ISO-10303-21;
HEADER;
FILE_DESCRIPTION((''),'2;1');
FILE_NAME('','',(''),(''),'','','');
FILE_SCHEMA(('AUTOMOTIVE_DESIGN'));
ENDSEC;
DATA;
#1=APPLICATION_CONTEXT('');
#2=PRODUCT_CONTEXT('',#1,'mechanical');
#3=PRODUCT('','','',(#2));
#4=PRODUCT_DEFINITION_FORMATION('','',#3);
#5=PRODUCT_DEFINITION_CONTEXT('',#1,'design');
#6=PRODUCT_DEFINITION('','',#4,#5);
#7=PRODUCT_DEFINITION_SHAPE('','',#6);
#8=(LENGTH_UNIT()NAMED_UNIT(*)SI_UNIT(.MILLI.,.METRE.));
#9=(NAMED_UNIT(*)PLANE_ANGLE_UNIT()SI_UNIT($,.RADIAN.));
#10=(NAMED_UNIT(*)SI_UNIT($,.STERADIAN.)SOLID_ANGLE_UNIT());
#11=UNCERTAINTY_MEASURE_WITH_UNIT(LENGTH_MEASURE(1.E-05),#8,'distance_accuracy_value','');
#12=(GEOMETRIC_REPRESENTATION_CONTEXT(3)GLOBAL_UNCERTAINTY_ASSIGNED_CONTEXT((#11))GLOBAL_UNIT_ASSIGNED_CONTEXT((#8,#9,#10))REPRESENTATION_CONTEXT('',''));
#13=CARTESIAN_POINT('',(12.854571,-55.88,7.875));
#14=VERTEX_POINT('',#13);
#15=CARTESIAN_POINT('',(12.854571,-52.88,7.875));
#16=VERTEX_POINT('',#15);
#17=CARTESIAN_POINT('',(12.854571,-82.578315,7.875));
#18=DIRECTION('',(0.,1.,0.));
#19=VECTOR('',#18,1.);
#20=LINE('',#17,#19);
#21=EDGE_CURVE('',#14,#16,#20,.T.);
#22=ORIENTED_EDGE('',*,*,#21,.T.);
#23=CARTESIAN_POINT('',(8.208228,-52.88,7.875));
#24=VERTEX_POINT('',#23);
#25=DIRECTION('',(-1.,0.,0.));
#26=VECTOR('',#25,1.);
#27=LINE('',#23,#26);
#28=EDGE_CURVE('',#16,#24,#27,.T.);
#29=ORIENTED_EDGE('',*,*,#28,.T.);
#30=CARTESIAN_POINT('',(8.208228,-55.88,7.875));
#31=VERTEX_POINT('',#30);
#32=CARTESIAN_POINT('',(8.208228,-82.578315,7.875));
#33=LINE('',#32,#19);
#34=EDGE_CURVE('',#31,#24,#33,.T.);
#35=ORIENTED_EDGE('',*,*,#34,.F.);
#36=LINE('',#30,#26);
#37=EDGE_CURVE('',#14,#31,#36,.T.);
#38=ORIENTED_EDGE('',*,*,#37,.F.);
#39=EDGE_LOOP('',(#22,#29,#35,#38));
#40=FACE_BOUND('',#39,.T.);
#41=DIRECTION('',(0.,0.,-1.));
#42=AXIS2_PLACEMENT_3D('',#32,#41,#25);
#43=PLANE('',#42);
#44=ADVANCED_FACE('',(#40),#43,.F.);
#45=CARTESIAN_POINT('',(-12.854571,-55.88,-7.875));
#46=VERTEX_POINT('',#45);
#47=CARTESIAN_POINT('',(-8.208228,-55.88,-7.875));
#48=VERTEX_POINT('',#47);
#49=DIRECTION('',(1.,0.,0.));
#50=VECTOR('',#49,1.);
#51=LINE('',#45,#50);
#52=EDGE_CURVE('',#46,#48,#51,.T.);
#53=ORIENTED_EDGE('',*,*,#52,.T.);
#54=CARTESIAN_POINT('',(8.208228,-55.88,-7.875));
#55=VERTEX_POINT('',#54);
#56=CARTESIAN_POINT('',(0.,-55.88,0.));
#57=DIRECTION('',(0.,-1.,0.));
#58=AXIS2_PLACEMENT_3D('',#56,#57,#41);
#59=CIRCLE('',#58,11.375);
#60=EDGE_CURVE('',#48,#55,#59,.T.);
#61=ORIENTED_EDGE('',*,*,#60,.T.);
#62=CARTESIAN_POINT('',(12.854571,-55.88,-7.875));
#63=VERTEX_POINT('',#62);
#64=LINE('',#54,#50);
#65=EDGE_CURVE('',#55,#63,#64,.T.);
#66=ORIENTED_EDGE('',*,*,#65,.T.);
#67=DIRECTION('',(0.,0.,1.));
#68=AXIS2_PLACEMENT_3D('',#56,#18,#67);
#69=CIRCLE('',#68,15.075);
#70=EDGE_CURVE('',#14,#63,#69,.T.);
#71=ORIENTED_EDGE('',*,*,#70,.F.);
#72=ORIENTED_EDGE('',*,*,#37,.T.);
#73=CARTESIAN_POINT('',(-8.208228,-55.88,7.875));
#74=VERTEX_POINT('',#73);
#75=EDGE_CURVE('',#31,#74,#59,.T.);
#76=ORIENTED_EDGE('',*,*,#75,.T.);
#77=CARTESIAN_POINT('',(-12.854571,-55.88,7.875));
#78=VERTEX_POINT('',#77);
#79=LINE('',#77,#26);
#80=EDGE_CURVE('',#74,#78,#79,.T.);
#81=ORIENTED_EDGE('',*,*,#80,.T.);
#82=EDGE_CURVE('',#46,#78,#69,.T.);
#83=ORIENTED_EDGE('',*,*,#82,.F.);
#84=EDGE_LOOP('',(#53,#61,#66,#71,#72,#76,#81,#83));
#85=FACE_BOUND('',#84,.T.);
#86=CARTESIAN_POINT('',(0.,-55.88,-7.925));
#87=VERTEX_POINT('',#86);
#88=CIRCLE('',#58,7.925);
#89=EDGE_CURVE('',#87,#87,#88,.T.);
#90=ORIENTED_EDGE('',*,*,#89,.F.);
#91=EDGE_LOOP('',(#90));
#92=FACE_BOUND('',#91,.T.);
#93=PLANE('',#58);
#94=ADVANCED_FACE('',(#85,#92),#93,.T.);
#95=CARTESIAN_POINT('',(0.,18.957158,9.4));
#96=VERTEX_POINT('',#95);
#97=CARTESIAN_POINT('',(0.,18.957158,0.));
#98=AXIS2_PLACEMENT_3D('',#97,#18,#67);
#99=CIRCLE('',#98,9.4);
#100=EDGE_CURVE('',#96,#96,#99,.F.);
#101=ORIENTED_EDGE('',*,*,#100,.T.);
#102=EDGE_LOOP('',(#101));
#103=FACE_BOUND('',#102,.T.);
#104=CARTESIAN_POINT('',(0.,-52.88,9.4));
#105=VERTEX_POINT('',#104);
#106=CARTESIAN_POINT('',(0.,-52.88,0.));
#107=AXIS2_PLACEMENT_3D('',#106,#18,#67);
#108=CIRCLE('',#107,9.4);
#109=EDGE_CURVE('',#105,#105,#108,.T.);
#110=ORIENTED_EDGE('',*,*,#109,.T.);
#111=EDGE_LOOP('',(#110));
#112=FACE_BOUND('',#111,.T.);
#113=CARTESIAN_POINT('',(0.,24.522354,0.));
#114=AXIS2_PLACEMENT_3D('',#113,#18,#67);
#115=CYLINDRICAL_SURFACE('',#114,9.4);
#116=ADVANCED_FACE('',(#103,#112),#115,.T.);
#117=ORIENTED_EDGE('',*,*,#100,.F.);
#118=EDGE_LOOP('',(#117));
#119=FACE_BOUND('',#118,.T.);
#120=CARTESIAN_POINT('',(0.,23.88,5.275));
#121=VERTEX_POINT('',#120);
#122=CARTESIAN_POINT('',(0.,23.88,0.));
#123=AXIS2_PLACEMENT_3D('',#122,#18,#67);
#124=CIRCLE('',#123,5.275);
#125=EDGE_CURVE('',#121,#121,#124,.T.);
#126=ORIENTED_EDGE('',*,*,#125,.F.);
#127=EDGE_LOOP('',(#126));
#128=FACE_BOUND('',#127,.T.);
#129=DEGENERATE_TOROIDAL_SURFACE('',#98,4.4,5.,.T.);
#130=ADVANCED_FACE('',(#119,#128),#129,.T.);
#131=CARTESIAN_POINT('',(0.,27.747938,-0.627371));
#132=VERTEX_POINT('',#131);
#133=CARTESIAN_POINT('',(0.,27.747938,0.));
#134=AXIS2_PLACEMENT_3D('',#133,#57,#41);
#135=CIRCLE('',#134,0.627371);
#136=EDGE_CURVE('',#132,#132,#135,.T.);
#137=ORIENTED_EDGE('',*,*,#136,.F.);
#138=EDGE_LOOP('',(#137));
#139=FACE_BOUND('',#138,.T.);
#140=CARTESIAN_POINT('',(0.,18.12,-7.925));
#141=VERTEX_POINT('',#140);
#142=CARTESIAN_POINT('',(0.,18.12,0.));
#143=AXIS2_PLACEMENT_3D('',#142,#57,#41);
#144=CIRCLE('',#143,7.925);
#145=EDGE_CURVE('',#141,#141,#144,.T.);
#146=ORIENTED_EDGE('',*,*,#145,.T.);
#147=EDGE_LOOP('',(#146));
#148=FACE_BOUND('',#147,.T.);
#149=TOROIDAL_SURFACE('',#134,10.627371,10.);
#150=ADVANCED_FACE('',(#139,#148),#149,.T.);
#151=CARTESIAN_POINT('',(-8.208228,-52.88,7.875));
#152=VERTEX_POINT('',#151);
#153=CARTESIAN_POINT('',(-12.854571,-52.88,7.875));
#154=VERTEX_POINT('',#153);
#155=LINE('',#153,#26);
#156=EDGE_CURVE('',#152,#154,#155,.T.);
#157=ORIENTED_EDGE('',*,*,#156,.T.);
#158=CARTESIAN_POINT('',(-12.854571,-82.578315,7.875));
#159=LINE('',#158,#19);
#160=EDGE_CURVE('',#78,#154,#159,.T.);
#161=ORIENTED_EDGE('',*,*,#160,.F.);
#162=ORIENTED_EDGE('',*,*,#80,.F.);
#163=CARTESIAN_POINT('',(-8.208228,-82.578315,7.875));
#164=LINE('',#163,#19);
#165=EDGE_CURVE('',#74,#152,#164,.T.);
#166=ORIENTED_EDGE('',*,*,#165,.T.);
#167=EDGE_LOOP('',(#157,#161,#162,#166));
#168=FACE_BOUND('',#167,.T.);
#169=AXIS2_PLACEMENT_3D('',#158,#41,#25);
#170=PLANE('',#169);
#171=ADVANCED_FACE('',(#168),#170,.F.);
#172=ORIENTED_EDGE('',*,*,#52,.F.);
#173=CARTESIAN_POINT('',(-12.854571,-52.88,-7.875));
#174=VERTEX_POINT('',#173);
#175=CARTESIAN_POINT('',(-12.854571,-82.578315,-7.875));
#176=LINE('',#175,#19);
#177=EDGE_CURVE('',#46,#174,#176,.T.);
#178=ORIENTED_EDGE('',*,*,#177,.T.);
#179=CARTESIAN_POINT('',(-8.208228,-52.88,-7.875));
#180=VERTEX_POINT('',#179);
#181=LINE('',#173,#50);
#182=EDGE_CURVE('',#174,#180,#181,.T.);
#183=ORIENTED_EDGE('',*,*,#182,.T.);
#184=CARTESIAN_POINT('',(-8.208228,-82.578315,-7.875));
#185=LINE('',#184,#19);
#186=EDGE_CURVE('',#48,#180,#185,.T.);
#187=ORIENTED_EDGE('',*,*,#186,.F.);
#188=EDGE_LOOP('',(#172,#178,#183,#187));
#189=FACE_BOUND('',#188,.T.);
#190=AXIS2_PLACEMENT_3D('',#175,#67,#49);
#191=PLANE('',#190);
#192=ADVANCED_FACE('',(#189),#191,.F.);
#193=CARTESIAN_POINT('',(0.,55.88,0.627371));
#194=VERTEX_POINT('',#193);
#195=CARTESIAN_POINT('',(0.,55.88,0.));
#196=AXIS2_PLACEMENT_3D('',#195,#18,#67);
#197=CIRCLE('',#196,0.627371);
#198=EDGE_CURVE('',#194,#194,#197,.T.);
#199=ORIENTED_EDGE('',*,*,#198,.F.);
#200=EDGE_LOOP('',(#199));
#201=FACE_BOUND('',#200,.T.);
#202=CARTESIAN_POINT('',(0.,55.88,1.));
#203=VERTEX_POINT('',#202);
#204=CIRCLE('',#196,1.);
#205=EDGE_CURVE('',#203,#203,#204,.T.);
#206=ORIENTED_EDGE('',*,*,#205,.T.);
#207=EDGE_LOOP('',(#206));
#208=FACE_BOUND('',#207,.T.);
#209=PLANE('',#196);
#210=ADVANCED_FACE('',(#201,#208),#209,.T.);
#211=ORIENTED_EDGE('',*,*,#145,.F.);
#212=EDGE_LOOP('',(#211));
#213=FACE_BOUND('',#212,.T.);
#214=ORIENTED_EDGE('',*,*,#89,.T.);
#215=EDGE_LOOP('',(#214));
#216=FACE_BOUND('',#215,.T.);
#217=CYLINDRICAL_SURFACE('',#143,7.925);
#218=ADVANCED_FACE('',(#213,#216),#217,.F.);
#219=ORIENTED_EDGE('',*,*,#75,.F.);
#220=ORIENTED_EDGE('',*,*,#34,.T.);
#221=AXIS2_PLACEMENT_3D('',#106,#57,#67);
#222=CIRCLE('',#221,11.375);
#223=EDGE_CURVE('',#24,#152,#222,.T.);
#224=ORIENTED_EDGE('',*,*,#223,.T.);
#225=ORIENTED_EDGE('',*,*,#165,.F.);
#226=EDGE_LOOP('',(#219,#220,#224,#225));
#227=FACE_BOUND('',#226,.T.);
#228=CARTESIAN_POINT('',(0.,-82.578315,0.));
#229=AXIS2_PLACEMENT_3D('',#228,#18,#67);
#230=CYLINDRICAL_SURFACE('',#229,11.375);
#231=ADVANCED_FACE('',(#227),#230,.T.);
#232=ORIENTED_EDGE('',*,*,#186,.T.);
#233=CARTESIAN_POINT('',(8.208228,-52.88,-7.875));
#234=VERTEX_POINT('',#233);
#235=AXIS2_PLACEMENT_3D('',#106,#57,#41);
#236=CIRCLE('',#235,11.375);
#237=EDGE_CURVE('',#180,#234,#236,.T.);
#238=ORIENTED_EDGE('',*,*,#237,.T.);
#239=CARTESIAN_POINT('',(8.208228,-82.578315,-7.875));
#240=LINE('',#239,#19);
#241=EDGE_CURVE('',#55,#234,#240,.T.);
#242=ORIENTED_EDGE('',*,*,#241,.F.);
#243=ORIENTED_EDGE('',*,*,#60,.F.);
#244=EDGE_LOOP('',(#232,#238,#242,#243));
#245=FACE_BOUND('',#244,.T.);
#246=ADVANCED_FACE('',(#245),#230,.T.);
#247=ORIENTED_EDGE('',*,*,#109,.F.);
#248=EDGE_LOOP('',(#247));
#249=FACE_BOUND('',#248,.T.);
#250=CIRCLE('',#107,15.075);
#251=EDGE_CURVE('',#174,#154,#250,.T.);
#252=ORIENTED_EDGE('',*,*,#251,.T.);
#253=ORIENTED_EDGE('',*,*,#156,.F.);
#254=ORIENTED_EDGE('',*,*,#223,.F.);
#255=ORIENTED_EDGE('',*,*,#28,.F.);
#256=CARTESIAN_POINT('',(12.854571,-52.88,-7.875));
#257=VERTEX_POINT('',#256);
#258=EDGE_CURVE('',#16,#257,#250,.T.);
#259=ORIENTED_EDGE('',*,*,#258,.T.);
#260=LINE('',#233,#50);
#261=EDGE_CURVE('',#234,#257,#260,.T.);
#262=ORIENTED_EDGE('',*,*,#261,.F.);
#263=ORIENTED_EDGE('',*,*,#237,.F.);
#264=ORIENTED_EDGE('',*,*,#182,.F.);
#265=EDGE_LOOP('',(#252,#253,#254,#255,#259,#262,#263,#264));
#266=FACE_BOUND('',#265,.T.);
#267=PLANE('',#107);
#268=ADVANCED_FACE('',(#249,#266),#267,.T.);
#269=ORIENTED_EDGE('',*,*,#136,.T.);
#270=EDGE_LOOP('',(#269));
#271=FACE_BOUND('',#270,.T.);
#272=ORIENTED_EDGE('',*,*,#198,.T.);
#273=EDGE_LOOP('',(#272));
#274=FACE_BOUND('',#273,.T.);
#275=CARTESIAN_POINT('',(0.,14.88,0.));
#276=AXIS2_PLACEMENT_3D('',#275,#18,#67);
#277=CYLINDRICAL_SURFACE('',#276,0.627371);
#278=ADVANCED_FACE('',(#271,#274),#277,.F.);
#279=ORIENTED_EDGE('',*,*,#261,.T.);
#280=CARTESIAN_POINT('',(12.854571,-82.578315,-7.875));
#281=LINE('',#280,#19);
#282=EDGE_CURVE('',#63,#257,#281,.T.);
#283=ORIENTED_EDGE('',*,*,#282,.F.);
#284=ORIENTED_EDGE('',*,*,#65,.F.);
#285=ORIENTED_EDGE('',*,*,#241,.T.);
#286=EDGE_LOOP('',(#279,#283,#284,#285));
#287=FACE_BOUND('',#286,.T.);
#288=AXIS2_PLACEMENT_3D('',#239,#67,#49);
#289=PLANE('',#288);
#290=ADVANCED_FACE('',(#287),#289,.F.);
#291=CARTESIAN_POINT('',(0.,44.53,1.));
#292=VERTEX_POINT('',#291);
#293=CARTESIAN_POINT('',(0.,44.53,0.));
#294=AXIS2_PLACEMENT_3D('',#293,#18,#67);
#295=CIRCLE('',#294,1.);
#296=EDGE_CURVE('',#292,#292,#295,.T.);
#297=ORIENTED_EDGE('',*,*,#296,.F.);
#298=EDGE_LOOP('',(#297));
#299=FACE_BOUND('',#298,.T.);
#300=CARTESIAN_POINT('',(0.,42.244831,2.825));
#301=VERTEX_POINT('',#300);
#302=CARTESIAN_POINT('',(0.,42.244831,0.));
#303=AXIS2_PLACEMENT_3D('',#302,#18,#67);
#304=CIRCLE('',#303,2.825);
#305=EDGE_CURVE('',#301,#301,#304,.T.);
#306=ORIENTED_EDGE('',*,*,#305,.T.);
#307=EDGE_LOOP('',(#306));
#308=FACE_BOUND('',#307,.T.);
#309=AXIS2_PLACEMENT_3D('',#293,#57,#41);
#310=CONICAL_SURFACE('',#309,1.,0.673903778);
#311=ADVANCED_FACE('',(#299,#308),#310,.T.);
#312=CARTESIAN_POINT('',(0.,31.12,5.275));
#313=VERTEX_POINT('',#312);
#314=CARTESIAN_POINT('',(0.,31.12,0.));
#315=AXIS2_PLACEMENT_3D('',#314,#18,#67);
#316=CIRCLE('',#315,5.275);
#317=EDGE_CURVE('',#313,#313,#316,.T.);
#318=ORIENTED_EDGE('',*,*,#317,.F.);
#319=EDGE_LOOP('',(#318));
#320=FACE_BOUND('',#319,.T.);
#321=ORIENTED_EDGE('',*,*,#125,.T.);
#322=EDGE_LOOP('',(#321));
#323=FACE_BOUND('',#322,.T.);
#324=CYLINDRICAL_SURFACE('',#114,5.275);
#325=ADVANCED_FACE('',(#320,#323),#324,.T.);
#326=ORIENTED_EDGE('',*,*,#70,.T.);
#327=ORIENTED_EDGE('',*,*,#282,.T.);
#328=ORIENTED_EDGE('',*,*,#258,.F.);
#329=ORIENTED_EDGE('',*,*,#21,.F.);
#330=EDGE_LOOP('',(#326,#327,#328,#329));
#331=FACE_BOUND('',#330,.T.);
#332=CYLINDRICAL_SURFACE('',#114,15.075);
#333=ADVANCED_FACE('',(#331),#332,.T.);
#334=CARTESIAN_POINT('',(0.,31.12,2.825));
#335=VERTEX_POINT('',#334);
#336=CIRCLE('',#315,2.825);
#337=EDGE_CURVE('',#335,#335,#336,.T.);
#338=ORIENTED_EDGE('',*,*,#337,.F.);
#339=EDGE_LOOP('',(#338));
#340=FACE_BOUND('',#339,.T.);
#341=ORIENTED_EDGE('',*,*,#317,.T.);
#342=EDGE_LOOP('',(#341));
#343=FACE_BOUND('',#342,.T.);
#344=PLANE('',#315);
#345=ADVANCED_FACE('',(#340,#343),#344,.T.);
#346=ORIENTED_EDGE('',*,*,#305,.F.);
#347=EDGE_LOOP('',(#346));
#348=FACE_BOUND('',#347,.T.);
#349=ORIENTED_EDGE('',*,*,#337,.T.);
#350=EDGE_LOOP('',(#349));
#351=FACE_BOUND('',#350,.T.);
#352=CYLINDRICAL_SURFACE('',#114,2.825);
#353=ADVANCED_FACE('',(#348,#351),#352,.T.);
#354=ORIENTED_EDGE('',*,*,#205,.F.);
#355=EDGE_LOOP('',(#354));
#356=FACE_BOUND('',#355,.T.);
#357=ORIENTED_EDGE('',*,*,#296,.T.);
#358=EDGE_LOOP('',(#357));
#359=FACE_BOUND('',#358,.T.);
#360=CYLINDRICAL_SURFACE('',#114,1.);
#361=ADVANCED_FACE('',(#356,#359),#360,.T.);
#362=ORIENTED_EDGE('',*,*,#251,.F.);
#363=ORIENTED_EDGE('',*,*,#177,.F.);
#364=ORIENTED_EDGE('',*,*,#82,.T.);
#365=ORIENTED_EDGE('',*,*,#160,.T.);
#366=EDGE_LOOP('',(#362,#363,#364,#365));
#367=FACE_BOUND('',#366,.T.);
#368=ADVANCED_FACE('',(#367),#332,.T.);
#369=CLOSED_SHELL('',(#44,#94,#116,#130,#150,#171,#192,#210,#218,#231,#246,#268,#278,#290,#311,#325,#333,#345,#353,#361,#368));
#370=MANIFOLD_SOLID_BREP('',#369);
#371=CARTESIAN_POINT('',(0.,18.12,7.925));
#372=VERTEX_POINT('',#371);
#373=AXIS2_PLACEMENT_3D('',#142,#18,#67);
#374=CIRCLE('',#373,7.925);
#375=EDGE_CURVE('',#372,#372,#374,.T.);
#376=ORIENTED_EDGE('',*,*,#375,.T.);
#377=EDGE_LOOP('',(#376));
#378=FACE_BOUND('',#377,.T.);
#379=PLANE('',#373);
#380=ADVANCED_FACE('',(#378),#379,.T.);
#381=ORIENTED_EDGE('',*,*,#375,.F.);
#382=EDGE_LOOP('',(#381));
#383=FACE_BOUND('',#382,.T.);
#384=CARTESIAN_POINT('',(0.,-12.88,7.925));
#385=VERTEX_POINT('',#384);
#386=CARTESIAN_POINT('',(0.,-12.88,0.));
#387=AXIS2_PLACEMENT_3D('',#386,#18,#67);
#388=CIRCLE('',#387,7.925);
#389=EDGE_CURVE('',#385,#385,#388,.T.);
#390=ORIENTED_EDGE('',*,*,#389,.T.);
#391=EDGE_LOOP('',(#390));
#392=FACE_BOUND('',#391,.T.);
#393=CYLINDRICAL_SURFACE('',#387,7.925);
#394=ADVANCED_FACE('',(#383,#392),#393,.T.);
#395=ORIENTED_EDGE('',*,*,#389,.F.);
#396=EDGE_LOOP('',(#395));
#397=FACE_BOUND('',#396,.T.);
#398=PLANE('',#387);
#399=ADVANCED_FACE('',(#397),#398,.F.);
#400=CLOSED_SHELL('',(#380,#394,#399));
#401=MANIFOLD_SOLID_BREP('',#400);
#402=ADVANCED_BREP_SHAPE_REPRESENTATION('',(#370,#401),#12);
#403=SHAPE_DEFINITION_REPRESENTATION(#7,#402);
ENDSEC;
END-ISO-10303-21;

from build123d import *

# Parameters (mm, degrees)
FILLET1_R           = 5
CUT_EXTRUDE1_START  = -3
CUT_EXTRUDE1_DEPTH  = 3
SKETCH4_R           = 7.925
CUT_EXTRUDE2_DEPTH  = 74.00000000000003
SKETCH5_R           = 0.6273709550774836
CUT_EXTRUDE3_DEPTH  = 41.000000000000014
FILLET3_R           = 10
SKETCH6_R           = 7.925
BOSS_EXTRUDE2_DEPTH = 31.000000000000004


with BuildPart() as part:
    # Sketch2 → Revolve1 (revolve)
    with BuildSketch(Plane.XY, mode=Mode.PRIVATE) as revolve1_sk:
        Polygon((15.075000000000022, -55.88), (1.501e-14, -55.88), (1.501e-14, 55.88), (1.0000000000000149, 55.88), (1.0000000000000162, 44.53000000000001), (2.8250000000000046, 42.24483084777286), (2.8250000000000046, 31.120000000000005), (5.275000000000006, 31.120000000000005), (5.275000000000007, 23.880000000000006), (9.399999999999993, 23.880000000000006), (9.400000000000018, -52.88), (15.075000000000019, -52.88), align=None)
    revolve(revolve1_sk.sketch.rotate(Axis((0, 24.52235384982656, 0), (0, -1, 0)), 90), axis=Axis((0, 24.52235384982656, 0), (0, -1, 0)))

    # Fillet1
    # the kernel refuses this fillet: 5 mm, written as the material it takes off along each edge
    with BuildSketch(Plane(origin=(0, 23.880000000000006, 0), x_dir=(1.1e-16, 0, 1), z_dir=(1, 0, -1.1e-16))) as fillet1_piece_1:
        with BuildLine():
            CenterArc((4.399999999999994, 4.922842166879736), FILLET1_R, 280.07865810778594, 79.92134189221406)
            Line((9.399999999999995, 4.922842166879736), (9.499999999999995, 4.922842166879736))
            Line((9.499999999999995, 4.922842166879736), (9.499999999999993, 0))
            Line((9.499999999999993, 0), (9.399999999999993, -0.10000000000000142))
            ThreePointArc((9.399999999999993, -0.10000000000000142), (7.3374999999999195, -0.10000000000000142), (5.292499999999843, -0.09845684333667037))
            Line((5.292499999999843, -0.09845684333667037), (5.274999999999846, 9.0594e-13))
        make_face()
    revolve(axis=Axis((0, 23.880000000000006, 0), (0, -1, 0)), mode=Mode.SUBTRACT)

    # Sketch3 → Cut-Extrude1 (cut)
    with BuildSketch(Plane(origin=(0, -52.88, 0), x_dir=(1, 0, 0), z_dir=(0, 1, 0)).offset(CUT_EXTRUDE1_START)):
        with BuildLine():
            Line((-12.854571171377149, 7.875), (-8.208227579691002, 7.875))
            ThreePointArc((-8.208227579691002, 7.875), (7e-16, 11.375), (8.208227579691002, 7.875))
            Line((8.208227579691002, 7.875), (12.854571171377149, 7.875))
            ThreePointArc((12.854571171377149, 7.875), (-2.42e-15, 15.075000000000015), (-12.854571171377149, 7.875))
        make_face()
        with BuildLine():
            Line((-12.854571171377149, -7.875), (-8.208227579691002, -7.875))
            ThreePointArc((-8.208227579691002, -7.875), (7e-16, -11.375), (8.208227579691002, -7.875))
            Line((8.208227579691002, -7.875), (12.854571171377149, -7.875))
            ThreePointArc((12.854571171377149, -7.875), (-2.42e-15, -15.075000000000015), (-12.854571171377149, -7.875))
        make_face()
    extrude(amount=CUT_EXTRUDE1_DEPTH, mode=Mode.SUBTRACT)

    # Sketch4 → Cut-Extrude2 (cut)
    with BuildSketch(Plane.XZ.offset(55.88)):
        with Locations(Location((0, 0, 0), (0, 0, 270))):
            Circle(SKETCH4_R)
    extrude(amount=-CUT_EXTRUDE2_DEPTH, mode=Mode.SUBTRACT)

    # Sketch5 → Cut-Extrude3 (cut)
    with BuildSketch(Plane(origin=(0, 55.88, 0), x_dir=(1, 0, 0), z_dir=(0, 1, 0))):
        with Locations(Location((0, 0, 0), (0, 0, 270))):
            Circle(SKETCH5_R)
    extrude(amount=-CUT_EXTRUDE3_DEPTH, mode=Mode.SUBTRACT)

    # Fillet3
    # the kernel refuses this fillet: 10 mm, written as the material it takes off along each edge
    with BuildSketch(Plane(origin=(0, 18.120000000000026, 0), x_dir=(-1.8e-16, 0, 1), z_dir=(-1, 0, -1.8e-16))) as fillet3_piece_1:
        with BuildLine():
            CenterArc((10.627370955077483, 9.627938056570244), FILLET3_R, 180, 74.32162410207388)
            Line((0.6273709550774829, 9.627938056570244), (0.42737095507748285, 9.627938056570244))
            Line((0.42737095507748285, 9.627938056570244), (0.4273709550774836, 0))
            Line((0.4273709550774836, 0), (0.6273709550774836, -0.1999999999999993))
            ThreePointArc((0.6273709550774836, -0.1999999999999993), (4.276185477538742, -0.1999999999999993), (7.87095258089845, -0.19255876113140502))
            Line((7.87095258089845, -0.19255876113140502), (7.925, 0))
        make_face()
    revolve(axis=Axis((0, 18.120000000000026, 0), (0, 1, 0)), mode=Mode.SUBTRACT)


with BuildPart() as body_2:
    # Sketch6 → Boss-Extrude2 (new body)
    with BuildSketch(Plane(origin=(0, 18.120000000000015, 0), x_dir=(1, 0, 0), z_dir=(0, 1, 0))):
        with Locations(Location((0, 0, 0), (0, 0, 270))):
            Circle(SKETCH6_R)
    extrude(amount=-BOSS_EXTRUDE2_DEPTH)


solid = Compound([part.part, body_2.part])
